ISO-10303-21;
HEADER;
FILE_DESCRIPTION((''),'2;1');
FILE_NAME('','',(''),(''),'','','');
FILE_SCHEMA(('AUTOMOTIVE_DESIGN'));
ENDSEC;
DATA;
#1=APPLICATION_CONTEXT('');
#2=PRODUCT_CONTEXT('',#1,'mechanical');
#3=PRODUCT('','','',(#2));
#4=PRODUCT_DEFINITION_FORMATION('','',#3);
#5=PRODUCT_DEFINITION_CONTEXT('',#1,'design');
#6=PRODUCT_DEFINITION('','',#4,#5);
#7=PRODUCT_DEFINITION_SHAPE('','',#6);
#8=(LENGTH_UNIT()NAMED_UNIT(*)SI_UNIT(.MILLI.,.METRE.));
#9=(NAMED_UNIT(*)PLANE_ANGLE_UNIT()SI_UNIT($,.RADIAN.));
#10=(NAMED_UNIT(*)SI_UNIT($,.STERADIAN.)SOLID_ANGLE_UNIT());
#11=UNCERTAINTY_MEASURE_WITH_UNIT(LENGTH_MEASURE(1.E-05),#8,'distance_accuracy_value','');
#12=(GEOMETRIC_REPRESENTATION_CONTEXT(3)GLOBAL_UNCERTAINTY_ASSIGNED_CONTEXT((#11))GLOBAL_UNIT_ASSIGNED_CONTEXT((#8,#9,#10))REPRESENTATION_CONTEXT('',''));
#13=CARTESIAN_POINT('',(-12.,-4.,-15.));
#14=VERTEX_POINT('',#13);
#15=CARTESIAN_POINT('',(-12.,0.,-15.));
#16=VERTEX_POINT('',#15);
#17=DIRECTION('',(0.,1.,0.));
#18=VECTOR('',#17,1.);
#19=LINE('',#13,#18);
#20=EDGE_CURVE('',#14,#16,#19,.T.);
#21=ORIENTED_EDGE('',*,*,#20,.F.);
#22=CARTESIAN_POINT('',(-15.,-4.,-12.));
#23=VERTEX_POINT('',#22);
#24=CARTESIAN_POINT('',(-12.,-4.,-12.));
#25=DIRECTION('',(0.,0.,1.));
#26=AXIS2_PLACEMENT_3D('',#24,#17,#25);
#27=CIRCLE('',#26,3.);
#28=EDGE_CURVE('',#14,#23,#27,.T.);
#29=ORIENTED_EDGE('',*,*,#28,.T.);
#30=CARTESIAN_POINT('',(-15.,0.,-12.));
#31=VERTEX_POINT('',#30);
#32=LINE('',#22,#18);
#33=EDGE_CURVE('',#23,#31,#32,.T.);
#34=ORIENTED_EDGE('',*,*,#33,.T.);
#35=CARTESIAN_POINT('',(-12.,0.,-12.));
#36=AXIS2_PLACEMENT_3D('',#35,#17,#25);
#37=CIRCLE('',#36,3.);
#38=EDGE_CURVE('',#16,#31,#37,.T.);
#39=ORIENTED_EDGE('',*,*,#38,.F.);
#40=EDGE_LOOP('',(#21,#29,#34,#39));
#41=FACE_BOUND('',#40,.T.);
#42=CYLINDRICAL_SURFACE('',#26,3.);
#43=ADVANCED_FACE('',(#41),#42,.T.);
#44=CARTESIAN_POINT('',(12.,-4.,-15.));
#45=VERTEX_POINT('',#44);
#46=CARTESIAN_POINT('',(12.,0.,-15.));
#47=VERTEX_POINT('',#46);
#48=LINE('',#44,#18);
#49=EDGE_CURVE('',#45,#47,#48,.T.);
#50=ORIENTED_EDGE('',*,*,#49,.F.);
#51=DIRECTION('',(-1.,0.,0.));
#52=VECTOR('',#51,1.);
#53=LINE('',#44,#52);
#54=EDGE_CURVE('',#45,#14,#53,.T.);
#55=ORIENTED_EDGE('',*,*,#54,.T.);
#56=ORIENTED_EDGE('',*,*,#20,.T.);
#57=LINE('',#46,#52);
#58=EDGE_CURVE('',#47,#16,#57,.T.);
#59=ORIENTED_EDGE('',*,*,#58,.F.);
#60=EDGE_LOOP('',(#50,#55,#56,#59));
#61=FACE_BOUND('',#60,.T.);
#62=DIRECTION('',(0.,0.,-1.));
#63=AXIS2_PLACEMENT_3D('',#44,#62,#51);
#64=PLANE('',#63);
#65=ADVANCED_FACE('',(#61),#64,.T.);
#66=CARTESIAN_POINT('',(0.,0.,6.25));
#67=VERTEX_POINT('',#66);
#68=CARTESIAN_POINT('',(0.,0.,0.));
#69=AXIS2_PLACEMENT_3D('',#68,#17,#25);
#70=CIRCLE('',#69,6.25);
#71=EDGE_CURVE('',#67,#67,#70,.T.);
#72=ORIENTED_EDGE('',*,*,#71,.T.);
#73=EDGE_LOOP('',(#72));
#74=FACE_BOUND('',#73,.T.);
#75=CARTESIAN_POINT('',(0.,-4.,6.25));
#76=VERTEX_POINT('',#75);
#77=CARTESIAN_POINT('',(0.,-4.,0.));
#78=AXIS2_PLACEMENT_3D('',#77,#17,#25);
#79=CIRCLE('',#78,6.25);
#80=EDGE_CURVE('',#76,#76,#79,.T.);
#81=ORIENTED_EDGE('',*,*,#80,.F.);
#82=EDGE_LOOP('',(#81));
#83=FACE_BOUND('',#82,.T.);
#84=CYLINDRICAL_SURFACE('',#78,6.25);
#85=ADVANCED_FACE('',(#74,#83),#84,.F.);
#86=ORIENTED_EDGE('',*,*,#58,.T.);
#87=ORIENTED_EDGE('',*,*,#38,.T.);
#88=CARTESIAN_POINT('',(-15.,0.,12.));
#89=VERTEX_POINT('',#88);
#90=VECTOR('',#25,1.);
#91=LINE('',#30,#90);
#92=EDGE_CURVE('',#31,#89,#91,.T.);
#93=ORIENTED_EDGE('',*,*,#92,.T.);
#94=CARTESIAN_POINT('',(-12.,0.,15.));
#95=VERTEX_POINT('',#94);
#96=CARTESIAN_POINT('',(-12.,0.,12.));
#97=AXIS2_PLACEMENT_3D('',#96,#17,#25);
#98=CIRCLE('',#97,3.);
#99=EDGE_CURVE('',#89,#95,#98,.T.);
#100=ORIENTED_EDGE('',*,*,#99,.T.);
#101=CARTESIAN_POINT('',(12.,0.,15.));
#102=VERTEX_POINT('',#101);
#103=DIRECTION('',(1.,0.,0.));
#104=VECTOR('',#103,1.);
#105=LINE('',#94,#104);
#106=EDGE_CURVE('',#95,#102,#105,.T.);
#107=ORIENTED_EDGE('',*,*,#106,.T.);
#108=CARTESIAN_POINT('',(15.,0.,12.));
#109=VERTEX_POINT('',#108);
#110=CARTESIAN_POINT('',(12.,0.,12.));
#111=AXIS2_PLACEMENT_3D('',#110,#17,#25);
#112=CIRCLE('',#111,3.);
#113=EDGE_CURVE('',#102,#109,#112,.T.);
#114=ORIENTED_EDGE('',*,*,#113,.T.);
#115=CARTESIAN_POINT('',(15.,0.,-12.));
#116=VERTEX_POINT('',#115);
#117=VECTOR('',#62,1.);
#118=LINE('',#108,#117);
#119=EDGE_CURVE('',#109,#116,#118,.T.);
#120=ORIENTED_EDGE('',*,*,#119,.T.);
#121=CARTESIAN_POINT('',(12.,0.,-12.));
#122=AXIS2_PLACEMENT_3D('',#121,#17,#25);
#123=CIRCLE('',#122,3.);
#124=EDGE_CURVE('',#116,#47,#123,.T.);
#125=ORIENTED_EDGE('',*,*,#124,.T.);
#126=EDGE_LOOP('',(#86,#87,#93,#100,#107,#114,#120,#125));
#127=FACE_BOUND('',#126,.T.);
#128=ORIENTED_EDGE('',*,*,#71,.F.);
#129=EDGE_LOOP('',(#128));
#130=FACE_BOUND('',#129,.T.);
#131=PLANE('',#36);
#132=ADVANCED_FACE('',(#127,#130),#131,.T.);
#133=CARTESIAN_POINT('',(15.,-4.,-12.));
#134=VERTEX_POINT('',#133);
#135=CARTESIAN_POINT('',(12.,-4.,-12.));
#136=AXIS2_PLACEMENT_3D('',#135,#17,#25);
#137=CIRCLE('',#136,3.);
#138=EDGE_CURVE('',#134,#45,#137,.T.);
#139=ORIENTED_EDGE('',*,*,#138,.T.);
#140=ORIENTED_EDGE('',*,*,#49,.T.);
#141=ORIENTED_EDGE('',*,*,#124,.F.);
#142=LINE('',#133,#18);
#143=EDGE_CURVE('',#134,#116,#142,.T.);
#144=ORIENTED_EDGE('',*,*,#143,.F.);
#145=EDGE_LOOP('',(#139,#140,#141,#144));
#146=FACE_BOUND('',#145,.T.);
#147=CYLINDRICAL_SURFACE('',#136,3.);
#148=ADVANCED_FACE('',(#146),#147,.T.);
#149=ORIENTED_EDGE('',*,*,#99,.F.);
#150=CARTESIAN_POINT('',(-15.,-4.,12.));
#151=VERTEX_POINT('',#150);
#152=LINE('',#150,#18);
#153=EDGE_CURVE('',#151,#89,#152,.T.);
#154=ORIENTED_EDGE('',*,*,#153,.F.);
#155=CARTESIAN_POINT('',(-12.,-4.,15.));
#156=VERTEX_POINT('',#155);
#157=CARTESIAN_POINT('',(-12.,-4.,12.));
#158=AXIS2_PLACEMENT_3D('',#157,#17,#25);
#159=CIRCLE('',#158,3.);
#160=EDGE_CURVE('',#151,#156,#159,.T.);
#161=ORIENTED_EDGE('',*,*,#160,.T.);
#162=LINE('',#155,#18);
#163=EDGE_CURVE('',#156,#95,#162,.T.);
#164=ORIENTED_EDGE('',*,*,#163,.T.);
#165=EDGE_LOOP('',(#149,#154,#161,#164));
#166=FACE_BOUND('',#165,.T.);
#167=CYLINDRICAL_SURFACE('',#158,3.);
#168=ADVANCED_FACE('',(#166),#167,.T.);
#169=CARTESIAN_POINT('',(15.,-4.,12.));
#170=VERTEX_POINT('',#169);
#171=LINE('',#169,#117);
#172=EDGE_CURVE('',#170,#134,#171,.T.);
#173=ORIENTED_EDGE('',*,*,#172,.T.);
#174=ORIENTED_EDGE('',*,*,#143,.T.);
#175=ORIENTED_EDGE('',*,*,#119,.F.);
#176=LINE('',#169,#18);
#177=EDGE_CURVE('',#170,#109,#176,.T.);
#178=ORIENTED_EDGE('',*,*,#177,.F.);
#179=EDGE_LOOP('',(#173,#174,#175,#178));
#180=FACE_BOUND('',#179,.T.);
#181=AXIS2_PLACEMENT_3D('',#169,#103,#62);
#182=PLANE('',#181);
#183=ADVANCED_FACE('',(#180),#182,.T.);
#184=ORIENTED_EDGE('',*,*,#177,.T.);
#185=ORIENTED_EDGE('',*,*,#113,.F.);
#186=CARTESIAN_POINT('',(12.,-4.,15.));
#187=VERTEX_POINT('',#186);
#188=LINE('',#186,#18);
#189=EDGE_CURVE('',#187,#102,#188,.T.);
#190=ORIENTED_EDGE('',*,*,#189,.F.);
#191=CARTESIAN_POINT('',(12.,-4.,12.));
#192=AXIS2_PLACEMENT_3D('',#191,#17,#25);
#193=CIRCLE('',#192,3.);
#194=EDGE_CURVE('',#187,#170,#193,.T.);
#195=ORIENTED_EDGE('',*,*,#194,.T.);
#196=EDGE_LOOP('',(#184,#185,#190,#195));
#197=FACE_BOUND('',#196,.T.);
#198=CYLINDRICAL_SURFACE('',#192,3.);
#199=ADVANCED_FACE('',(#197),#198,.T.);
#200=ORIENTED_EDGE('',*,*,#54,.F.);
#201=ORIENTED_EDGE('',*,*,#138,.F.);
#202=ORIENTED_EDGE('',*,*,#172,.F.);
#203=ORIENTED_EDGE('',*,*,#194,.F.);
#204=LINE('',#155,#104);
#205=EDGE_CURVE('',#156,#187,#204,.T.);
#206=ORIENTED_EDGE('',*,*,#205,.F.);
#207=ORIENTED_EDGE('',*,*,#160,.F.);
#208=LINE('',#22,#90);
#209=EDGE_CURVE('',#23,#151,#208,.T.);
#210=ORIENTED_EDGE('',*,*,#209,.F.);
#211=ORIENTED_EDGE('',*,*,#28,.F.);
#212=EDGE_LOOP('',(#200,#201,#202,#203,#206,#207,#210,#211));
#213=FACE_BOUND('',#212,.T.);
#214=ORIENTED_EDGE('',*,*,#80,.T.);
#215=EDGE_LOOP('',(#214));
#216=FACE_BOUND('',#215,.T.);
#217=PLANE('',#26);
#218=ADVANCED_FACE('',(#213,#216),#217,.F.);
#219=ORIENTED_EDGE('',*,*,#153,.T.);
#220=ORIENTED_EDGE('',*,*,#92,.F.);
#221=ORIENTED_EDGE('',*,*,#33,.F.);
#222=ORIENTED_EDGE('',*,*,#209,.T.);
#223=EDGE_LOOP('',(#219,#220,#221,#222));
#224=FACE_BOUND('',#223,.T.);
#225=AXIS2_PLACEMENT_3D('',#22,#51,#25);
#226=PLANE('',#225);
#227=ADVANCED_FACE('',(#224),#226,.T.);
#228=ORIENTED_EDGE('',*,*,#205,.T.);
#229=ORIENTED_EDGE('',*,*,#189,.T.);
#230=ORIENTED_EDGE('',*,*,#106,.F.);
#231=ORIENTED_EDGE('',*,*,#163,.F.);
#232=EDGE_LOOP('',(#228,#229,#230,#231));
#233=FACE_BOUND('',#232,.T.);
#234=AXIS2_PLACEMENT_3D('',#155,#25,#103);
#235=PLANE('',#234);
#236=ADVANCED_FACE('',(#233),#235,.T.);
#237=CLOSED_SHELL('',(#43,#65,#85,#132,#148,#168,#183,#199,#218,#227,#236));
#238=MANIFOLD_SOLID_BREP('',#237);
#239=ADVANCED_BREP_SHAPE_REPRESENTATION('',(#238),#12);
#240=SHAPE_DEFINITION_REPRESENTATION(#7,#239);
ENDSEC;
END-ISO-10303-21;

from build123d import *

# Parameters (mm, degrees)
SKETCH_1_R             = 6.25
SM_BASE_FLANGE_1_DEPTH = 4


# Sheet-metal steps are written as plain solids
with BuildPart() as part:
    # Sketch 1 → Базовая кромка1 (new body)
    with BuildSketch(Plane(origin=(0, 0, 0), x_dir=(1, 0, 0), z_dir=(0, 1, 0))):
        with BuildLine():
            Line((12, 15), (-12, 15))
            ThreePointArc((-12, 15), (-14.121320344, 14.121320344), (-15, 12))
            Line((-15, 12), (-15, -12))
            ThreePointArc((-15, -12), (-14.121320344, -14.121320344), (-12, -15))
            Line((-12, -15), (12, -15))
            ThreePointArc((12, -15), (14.121320344, -14.121320344), (15, -12))
            Line((15, -12), (15, 12))
            ThreePointArc((15, 12), (14.121320344, 14.121320344), (12, 15))
        make_face()
        with Locations(Location((0, 0, 0), (0, 0, 270))):
            Circle(SKETCH_1_R, mode=Mode.SUBTRACT)
    extrude(amount=-SM_BASE_FLANGE_1_DEPTH)


solid = part.part
